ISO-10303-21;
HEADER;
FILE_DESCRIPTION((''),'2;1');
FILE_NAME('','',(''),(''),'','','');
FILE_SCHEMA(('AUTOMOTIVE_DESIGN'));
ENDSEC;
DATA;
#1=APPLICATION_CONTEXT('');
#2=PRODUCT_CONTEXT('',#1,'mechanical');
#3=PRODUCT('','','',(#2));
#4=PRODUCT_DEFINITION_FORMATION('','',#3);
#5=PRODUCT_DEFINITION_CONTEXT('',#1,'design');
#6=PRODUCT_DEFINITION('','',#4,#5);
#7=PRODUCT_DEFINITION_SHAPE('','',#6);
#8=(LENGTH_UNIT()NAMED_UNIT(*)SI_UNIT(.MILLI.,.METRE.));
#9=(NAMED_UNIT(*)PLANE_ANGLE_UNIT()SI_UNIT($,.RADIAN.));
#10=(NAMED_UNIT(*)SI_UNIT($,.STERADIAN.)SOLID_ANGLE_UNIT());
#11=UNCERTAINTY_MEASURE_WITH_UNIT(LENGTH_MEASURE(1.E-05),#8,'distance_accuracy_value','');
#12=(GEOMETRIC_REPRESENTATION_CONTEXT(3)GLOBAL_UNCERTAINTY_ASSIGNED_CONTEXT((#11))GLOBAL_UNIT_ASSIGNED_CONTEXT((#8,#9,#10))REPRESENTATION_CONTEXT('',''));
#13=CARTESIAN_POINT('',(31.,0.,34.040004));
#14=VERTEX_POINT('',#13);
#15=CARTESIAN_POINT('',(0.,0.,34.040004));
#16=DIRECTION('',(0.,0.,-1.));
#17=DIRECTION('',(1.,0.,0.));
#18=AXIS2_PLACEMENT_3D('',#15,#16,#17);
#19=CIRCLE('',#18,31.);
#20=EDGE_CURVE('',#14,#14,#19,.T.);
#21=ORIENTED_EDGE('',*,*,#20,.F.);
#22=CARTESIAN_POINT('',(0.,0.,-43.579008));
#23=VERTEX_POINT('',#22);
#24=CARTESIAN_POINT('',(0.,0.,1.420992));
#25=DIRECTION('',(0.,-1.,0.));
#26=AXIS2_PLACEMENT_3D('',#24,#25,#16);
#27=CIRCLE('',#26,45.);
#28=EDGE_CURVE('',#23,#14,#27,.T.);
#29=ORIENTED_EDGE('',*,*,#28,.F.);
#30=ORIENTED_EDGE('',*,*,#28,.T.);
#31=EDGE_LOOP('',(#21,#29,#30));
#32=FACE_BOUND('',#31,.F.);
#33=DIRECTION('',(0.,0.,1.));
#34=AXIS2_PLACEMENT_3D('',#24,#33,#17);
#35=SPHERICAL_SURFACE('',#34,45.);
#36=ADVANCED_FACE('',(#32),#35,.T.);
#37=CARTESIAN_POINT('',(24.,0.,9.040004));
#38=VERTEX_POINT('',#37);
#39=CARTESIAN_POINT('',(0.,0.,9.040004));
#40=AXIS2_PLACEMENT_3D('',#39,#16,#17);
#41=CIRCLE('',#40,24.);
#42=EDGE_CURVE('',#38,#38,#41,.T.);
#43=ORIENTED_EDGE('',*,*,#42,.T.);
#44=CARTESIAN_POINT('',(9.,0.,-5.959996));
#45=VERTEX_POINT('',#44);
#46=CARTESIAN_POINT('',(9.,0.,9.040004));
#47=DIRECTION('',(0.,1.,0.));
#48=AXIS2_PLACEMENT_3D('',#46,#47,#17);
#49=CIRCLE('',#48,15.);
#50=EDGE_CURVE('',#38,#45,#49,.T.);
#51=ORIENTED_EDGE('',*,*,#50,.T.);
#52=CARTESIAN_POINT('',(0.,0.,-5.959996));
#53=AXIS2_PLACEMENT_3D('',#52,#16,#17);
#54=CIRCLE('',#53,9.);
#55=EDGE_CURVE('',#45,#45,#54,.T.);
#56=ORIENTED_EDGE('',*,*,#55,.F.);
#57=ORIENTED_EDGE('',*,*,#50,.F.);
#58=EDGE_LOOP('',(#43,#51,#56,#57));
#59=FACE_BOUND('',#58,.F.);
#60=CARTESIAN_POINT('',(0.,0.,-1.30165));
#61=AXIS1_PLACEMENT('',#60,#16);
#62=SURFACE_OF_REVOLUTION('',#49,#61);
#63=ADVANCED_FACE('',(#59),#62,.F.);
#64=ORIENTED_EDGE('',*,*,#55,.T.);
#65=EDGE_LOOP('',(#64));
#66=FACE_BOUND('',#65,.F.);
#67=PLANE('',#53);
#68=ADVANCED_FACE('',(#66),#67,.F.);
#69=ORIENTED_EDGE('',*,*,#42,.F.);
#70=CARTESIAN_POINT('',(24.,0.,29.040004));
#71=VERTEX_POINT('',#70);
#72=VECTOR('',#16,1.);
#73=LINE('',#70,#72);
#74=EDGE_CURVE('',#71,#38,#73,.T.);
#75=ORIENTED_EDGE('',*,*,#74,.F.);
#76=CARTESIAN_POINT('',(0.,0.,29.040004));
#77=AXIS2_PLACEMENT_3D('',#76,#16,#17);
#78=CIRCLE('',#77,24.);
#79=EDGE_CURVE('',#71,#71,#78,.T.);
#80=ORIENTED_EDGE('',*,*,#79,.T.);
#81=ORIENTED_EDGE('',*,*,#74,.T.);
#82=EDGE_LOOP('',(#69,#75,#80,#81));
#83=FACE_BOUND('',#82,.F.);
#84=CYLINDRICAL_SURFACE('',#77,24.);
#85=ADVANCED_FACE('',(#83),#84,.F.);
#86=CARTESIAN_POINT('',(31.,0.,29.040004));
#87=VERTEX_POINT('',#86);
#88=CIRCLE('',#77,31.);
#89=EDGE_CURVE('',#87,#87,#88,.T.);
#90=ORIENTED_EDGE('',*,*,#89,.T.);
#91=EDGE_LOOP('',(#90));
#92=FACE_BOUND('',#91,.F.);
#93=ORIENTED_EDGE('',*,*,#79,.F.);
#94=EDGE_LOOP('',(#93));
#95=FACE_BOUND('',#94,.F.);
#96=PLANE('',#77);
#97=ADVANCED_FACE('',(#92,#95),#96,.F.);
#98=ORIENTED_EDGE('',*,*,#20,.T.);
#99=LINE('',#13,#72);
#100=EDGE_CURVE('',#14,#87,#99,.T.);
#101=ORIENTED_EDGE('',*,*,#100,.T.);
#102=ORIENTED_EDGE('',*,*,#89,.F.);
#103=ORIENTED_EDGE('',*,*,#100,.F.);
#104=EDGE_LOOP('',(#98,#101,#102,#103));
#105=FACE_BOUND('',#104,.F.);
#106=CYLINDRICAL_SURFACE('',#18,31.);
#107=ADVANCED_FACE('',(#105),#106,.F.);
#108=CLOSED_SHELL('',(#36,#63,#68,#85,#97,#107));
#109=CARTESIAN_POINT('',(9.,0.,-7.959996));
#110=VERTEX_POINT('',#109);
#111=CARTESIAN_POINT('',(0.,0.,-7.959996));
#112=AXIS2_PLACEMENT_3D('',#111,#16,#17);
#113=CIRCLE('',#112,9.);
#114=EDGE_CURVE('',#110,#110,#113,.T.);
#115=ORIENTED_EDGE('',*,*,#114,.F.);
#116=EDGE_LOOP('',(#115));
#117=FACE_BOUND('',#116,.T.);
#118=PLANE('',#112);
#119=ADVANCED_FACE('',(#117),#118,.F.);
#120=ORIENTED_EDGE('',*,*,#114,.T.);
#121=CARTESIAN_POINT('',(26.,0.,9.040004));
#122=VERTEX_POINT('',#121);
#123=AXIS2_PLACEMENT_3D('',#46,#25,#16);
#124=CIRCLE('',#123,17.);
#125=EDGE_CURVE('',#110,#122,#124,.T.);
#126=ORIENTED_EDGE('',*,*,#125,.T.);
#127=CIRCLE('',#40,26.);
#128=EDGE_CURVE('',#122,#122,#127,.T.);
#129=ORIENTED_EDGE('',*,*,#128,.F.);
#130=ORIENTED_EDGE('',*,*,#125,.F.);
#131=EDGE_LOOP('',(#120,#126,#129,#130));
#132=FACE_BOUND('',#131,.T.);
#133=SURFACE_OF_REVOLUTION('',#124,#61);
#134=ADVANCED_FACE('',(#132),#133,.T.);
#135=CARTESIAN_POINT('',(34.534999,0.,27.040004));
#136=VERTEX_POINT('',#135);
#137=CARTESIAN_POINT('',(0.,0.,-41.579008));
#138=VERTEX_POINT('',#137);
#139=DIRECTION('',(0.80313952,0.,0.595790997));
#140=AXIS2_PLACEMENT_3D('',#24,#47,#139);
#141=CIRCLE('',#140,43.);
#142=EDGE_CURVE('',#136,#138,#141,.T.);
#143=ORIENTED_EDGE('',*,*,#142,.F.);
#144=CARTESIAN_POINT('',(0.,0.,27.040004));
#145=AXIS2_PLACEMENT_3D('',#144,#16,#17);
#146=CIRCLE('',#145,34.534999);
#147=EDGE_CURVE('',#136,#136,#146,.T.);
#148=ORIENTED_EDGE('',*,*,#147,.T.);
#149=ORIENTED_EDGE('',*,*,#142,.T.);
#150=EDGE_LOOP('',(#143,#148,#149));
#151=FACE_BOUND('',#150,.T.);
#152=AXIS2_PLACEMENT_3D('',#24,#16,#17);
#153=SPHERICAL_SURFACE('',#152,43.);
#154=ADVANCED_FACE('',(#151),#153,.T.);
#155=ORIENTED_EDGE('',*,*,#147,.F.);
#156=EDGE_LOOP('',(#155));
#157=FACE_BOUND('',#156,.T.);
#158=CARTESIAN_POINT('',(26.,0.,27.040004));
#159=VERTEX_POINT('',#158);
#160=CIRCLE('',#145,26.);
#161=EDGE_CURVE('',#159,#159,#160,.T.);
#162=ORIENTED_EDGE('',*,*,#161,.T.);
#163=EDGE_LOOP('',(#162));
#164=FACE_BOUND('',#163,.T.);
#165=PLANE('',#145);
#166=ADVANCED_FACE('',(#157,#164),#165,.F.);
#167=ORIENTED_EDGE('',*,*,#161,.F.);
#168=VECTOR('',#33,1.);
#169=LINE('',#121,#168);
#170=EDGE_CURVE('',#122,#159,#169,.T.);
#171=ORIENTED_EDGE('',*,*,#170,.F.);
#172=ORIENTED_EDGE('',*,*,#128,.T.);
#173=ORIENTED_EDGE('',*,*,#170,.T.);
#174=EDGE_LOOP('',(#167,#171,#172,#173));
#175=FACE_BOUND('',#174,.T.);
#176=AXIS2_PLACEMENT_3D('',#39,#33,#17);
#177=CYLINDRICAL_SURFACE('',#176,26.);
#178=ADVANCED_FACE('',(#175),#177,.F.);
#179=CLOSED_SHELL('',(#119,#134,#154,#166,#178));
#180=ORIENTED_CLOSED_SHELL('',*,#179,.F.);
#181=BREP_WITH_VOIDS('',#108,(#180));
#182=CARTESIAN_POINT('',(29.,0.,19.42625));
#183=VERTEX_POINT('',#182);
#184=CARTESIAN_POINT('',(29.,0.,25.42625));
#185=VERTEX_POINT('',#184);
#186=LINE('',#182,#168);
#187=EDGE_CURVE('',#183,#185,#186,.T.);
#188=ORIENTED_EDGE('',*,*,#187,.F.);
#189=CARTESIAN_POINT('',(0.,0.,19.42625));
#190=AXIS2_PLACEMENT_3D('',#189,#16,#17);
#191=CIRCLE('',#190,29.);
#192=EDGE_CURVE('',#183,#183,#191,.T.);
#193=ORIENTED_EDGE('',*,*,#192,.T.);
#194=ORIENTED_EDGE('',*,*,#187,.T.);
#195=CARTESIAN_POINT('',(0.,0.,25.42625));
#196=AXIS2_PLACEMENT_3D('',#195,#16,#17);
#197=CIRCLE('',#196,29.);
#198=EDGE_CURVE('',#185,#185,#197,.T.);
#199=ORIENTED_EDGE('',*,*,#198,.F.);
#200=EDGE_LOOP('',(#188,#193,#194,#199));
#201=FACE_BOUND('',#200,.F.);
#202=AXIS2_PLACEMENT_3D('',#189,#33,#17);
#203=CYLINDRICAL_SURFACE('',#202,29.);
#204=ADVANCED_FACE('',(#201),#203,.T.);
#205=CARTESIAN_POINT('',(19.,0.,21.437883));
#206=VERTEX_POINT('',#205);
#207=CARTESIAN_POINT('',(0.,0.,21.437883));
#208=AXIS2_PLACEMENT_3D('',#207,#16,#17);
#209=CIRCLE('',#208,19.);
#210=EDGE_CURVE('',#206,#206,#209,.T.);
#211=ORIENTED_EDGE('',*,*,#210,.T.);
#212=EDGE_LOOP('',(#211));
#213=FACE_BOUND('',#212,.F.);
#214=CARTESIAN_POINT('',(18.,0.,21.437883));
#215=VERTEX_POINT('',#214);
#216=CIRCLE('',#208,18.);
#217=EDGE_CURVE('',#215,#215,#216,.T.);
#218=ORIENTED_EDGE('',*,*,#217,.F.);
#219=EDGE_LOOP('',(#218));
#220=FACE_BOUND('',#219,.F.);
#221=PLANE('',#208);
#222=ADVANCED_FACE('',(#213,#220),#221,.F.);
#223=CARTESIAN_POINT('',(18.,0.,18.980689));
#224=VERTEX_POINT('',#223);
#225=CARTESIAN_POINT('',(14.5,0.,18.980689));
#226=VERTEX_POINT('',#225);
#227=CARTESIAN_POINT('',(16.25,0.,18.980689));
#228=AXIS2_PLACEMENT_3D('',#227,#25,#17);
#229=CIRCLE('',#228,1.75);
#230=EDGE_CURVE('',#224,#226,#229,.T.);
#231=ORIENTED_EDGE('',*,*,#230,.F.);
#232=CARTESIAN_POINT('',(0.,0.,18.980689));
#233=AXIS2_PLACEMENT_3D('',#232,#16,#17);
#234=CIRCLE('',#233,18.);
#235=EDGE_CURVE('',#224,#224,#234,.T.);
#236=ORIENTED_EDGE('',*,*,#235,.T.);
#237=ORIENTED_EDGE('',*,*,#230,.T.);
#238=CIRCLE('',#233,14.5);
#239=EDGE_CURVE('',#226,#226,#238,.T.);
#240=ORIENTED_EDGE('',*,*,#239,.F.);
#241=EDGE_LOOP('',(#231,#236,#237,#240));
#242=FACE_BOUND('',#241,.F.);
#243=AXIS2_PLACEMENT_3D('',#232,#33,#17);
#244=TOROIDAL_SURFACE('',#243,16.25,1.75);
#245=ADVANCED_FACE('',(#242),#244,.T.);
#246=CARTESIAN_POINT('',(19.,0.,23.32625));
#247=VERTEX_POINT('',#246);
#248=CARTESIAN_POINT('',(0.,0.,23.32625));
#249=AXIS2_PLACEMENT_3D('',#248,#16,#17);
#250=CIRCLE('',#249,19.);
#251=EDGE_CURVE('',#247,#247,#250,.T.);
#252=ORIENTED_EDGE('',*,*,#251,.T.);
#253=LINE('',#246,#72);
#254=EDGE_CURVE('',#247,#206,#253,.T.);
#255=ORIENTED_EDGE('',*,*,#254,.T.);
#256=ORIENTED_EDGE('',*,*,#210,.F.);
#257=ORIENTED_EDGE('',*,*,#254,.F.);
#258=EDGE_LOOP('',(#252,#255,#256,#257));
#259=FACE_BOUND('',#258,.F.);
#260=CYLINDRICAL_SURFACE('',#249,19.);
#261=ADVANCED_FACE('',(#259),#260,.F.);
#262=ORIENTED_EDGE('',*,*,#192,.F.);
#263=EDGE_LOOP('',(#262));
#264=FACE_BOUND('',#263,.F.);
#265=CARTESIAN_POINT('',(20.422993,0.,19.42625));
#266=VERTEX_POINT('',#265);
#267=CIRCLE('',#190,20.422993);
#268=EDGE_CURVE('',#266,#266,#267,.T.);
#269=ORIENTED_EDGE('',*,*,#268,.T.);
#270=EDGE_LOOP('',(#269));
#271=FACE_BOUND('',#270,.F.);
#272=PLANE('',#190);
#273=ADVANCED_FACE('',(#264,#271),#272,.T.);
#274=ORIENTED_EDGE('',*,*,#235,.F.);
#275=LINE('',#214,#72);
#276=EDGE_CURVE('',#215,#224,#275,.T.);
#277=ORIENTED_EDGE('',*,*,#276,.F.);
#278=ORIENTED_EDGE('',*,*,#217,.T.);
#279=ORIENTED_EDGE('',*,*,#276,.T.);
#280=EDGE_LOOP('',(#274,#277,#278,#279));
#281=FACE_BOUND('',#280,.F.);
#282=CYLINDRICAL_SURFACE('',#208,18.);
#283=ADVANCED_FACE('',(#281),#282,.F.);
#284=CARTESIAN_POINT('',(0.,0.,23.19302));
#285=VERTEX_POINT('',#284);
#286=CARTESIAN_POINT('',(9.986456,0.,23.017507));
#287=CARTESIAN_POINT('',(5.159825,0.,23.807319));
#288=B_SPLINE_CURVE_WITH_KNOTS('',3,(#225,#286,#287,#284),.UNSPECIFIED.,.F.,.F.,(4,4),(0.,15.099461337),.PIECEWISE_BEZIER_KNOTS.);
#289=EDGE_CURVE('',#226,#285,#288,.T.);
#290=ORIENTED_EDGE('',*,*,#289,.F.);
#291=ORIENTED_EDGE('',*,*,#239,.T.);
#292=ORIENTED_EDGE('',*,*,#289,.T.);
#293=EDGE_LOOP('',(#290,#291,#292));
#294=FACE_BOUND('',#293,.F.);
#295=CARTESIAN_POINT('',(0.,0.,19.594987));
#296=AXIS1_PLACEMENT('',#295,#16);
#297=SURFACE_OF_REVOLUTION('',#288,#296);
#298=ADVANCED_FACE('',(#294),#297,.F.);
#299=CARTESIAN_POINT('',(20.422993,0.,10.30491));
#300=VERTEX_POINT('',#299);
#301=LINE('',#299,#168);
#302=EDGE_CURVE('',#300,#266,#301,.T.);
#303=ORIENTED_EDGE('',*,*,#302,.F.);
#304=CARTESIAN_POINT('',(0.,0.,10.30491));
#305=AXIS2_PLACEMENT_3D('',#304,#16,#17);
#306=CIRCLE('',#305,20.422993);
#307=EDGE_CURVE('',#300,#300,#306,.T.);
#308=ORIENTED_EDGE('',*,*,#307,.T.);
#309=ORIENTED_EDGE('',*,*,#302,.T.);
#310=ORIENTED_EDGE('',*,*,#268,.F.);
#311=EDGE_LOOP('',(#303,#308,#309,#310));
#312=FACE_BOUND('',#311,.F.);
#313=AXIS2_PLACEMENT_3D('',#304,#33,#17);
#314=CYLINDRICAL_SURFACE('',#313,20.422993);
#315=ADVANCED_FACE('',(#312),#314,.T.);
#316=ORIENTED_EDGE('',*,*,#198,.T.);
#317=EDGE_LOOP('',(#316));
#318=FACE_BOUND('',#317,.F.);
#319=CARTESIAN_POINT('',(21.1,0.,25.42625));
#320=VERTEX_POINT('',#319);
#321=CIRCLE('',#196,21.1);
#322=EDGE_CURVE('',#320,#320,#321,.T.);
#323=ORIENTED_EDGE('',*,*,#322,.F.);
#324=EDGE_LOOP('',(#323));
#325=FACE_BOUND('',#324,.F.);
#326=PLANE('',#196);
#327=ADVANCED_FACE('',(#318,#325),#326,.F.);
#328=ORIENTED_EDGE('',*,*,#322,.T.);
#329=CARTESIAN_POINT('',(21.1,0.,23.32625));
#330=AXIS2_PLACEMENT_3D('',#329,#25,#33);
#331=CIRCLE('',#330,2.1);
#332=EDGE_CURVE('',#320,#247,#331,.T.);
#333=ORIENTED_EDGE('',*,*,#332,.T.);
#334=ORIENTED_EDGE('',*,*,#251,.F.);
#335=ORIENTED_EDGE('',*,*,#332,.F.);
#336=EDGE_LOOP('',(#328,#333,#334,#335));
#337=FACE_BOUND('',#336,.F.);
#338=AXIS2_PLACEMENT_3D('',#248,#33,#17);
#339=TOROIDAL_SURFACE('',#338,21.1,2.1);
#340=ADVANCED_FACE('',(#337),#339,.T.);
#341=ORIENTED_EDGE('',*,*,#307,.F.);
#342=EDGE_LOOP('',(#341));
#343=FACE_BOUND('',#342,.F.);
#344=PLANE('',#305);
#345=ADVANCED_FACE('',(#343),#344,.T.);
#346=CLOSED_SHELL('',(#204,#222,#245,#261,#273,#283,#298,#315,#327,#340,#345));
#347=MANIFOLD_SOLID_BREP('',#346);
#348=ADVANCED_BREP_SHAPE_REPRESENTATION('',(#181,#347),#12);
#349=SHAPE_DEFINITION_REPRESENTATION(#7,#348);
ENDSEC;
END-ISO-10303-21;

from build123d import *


# Not quite as in the source:
# - the program builds the solid bodies; features that only make, move or delete a surface that nothing else refers to are left out


with BuildPart() as f1:
    # F0 (on Front) → F1 (revolve)
    with BuildSketch(Plane.XZ):
        with BuildLine():
            Line((31, 29.0400044304), (24, 29.0400044304))
            Line((24, 29.0400044304), (24, 9.0400044304))
            ThreePointArc((24, 9.0400044304), (19.6066017178, -1.5665972874), (9, -5.9599955696))
            Line((9, -5.9599955696), (0, -5.9599955696))
            Line((0, -5.9599955696), (0, -7.9599955696))
            Line((0, -7.9599955696), (9, -7.9599955696))
            ThreePointArc((9, -7.9599955696), (21.0208152802, -2.9808108498), (26, 9.0400044304))
            Line((26, 9.0400044304), (26, 27.0400044304))
            Line((26, 27.0400044304), (34.5349993492, 27.0400044304))
            ThreePointArc((34.5349993492, 27.0400044304), (38.4097484566, -17.9101031612), (0, -41.5790084302))
            Line((0, -41.5790084302), (0, -43.5790084302))
            ThreePointArc((0, -43.5790084302), (41.7902834324, -15.2694910667), (31, 34.0400044304))
            Line((31, 34.0400044304), (31, 29.0400044304))
        make_face()
    revolve(axis=Axis((0, 0, -1.3016499579), (0, 0, -1)))


with BuildPart() as f3:
    # F2 (on Front) → F3 (revolve)
    with BuildSketch(Plane.XZ):
        with BuildLine():
            Line((29, 19.4262499511), (29, 25.4262499511))
            Line((29, 25.4262499511), (21.1, 25.4262499511))
            ThreePointArc((21.1, 25.4262499511), (19.6150757595, 24.8111741916), (19, 23.3262499511))
            Line((19, 23.3262499511), (19, 21.4378833771))
            Line((19, 21.4378833771), (18, 21.4378833771))
            Line((18, 21.4378833771), (18, 18.9806893468))
            ThreePointArc((18, 18.9806893468), (16.25, 20.7306893468), (14.5, 18.9806893468))
            add(Edge.make_bspline(
                [(14.5, 18.9806893468), (9.9864555523, 23.0175070465), (5.1598250866, 23.8073188812), (0, 23.1930203736)],
                knots=[0, 0, 0, 0, 15.0994613374, 15.0994613374, 15.0994613374, 15.0994613374], degree=3))
            Line((0, 23.1930203736), (0, 10.3049101308))
            Line((0, 10.3049101308), (20.4229932278, 10.3049101308))
            Line((20.4229932278, 10.3049101308), (20.4229932278, 19.4262499511))
            Line((20.4229932278, 19.4262499511), (29, 19.4262499511))
        make_face()
    revolve(axis=Axis((0, 0, 19.5949868066), (0, 0, -1)))


solid = Compound([f1.part, f3.part])
